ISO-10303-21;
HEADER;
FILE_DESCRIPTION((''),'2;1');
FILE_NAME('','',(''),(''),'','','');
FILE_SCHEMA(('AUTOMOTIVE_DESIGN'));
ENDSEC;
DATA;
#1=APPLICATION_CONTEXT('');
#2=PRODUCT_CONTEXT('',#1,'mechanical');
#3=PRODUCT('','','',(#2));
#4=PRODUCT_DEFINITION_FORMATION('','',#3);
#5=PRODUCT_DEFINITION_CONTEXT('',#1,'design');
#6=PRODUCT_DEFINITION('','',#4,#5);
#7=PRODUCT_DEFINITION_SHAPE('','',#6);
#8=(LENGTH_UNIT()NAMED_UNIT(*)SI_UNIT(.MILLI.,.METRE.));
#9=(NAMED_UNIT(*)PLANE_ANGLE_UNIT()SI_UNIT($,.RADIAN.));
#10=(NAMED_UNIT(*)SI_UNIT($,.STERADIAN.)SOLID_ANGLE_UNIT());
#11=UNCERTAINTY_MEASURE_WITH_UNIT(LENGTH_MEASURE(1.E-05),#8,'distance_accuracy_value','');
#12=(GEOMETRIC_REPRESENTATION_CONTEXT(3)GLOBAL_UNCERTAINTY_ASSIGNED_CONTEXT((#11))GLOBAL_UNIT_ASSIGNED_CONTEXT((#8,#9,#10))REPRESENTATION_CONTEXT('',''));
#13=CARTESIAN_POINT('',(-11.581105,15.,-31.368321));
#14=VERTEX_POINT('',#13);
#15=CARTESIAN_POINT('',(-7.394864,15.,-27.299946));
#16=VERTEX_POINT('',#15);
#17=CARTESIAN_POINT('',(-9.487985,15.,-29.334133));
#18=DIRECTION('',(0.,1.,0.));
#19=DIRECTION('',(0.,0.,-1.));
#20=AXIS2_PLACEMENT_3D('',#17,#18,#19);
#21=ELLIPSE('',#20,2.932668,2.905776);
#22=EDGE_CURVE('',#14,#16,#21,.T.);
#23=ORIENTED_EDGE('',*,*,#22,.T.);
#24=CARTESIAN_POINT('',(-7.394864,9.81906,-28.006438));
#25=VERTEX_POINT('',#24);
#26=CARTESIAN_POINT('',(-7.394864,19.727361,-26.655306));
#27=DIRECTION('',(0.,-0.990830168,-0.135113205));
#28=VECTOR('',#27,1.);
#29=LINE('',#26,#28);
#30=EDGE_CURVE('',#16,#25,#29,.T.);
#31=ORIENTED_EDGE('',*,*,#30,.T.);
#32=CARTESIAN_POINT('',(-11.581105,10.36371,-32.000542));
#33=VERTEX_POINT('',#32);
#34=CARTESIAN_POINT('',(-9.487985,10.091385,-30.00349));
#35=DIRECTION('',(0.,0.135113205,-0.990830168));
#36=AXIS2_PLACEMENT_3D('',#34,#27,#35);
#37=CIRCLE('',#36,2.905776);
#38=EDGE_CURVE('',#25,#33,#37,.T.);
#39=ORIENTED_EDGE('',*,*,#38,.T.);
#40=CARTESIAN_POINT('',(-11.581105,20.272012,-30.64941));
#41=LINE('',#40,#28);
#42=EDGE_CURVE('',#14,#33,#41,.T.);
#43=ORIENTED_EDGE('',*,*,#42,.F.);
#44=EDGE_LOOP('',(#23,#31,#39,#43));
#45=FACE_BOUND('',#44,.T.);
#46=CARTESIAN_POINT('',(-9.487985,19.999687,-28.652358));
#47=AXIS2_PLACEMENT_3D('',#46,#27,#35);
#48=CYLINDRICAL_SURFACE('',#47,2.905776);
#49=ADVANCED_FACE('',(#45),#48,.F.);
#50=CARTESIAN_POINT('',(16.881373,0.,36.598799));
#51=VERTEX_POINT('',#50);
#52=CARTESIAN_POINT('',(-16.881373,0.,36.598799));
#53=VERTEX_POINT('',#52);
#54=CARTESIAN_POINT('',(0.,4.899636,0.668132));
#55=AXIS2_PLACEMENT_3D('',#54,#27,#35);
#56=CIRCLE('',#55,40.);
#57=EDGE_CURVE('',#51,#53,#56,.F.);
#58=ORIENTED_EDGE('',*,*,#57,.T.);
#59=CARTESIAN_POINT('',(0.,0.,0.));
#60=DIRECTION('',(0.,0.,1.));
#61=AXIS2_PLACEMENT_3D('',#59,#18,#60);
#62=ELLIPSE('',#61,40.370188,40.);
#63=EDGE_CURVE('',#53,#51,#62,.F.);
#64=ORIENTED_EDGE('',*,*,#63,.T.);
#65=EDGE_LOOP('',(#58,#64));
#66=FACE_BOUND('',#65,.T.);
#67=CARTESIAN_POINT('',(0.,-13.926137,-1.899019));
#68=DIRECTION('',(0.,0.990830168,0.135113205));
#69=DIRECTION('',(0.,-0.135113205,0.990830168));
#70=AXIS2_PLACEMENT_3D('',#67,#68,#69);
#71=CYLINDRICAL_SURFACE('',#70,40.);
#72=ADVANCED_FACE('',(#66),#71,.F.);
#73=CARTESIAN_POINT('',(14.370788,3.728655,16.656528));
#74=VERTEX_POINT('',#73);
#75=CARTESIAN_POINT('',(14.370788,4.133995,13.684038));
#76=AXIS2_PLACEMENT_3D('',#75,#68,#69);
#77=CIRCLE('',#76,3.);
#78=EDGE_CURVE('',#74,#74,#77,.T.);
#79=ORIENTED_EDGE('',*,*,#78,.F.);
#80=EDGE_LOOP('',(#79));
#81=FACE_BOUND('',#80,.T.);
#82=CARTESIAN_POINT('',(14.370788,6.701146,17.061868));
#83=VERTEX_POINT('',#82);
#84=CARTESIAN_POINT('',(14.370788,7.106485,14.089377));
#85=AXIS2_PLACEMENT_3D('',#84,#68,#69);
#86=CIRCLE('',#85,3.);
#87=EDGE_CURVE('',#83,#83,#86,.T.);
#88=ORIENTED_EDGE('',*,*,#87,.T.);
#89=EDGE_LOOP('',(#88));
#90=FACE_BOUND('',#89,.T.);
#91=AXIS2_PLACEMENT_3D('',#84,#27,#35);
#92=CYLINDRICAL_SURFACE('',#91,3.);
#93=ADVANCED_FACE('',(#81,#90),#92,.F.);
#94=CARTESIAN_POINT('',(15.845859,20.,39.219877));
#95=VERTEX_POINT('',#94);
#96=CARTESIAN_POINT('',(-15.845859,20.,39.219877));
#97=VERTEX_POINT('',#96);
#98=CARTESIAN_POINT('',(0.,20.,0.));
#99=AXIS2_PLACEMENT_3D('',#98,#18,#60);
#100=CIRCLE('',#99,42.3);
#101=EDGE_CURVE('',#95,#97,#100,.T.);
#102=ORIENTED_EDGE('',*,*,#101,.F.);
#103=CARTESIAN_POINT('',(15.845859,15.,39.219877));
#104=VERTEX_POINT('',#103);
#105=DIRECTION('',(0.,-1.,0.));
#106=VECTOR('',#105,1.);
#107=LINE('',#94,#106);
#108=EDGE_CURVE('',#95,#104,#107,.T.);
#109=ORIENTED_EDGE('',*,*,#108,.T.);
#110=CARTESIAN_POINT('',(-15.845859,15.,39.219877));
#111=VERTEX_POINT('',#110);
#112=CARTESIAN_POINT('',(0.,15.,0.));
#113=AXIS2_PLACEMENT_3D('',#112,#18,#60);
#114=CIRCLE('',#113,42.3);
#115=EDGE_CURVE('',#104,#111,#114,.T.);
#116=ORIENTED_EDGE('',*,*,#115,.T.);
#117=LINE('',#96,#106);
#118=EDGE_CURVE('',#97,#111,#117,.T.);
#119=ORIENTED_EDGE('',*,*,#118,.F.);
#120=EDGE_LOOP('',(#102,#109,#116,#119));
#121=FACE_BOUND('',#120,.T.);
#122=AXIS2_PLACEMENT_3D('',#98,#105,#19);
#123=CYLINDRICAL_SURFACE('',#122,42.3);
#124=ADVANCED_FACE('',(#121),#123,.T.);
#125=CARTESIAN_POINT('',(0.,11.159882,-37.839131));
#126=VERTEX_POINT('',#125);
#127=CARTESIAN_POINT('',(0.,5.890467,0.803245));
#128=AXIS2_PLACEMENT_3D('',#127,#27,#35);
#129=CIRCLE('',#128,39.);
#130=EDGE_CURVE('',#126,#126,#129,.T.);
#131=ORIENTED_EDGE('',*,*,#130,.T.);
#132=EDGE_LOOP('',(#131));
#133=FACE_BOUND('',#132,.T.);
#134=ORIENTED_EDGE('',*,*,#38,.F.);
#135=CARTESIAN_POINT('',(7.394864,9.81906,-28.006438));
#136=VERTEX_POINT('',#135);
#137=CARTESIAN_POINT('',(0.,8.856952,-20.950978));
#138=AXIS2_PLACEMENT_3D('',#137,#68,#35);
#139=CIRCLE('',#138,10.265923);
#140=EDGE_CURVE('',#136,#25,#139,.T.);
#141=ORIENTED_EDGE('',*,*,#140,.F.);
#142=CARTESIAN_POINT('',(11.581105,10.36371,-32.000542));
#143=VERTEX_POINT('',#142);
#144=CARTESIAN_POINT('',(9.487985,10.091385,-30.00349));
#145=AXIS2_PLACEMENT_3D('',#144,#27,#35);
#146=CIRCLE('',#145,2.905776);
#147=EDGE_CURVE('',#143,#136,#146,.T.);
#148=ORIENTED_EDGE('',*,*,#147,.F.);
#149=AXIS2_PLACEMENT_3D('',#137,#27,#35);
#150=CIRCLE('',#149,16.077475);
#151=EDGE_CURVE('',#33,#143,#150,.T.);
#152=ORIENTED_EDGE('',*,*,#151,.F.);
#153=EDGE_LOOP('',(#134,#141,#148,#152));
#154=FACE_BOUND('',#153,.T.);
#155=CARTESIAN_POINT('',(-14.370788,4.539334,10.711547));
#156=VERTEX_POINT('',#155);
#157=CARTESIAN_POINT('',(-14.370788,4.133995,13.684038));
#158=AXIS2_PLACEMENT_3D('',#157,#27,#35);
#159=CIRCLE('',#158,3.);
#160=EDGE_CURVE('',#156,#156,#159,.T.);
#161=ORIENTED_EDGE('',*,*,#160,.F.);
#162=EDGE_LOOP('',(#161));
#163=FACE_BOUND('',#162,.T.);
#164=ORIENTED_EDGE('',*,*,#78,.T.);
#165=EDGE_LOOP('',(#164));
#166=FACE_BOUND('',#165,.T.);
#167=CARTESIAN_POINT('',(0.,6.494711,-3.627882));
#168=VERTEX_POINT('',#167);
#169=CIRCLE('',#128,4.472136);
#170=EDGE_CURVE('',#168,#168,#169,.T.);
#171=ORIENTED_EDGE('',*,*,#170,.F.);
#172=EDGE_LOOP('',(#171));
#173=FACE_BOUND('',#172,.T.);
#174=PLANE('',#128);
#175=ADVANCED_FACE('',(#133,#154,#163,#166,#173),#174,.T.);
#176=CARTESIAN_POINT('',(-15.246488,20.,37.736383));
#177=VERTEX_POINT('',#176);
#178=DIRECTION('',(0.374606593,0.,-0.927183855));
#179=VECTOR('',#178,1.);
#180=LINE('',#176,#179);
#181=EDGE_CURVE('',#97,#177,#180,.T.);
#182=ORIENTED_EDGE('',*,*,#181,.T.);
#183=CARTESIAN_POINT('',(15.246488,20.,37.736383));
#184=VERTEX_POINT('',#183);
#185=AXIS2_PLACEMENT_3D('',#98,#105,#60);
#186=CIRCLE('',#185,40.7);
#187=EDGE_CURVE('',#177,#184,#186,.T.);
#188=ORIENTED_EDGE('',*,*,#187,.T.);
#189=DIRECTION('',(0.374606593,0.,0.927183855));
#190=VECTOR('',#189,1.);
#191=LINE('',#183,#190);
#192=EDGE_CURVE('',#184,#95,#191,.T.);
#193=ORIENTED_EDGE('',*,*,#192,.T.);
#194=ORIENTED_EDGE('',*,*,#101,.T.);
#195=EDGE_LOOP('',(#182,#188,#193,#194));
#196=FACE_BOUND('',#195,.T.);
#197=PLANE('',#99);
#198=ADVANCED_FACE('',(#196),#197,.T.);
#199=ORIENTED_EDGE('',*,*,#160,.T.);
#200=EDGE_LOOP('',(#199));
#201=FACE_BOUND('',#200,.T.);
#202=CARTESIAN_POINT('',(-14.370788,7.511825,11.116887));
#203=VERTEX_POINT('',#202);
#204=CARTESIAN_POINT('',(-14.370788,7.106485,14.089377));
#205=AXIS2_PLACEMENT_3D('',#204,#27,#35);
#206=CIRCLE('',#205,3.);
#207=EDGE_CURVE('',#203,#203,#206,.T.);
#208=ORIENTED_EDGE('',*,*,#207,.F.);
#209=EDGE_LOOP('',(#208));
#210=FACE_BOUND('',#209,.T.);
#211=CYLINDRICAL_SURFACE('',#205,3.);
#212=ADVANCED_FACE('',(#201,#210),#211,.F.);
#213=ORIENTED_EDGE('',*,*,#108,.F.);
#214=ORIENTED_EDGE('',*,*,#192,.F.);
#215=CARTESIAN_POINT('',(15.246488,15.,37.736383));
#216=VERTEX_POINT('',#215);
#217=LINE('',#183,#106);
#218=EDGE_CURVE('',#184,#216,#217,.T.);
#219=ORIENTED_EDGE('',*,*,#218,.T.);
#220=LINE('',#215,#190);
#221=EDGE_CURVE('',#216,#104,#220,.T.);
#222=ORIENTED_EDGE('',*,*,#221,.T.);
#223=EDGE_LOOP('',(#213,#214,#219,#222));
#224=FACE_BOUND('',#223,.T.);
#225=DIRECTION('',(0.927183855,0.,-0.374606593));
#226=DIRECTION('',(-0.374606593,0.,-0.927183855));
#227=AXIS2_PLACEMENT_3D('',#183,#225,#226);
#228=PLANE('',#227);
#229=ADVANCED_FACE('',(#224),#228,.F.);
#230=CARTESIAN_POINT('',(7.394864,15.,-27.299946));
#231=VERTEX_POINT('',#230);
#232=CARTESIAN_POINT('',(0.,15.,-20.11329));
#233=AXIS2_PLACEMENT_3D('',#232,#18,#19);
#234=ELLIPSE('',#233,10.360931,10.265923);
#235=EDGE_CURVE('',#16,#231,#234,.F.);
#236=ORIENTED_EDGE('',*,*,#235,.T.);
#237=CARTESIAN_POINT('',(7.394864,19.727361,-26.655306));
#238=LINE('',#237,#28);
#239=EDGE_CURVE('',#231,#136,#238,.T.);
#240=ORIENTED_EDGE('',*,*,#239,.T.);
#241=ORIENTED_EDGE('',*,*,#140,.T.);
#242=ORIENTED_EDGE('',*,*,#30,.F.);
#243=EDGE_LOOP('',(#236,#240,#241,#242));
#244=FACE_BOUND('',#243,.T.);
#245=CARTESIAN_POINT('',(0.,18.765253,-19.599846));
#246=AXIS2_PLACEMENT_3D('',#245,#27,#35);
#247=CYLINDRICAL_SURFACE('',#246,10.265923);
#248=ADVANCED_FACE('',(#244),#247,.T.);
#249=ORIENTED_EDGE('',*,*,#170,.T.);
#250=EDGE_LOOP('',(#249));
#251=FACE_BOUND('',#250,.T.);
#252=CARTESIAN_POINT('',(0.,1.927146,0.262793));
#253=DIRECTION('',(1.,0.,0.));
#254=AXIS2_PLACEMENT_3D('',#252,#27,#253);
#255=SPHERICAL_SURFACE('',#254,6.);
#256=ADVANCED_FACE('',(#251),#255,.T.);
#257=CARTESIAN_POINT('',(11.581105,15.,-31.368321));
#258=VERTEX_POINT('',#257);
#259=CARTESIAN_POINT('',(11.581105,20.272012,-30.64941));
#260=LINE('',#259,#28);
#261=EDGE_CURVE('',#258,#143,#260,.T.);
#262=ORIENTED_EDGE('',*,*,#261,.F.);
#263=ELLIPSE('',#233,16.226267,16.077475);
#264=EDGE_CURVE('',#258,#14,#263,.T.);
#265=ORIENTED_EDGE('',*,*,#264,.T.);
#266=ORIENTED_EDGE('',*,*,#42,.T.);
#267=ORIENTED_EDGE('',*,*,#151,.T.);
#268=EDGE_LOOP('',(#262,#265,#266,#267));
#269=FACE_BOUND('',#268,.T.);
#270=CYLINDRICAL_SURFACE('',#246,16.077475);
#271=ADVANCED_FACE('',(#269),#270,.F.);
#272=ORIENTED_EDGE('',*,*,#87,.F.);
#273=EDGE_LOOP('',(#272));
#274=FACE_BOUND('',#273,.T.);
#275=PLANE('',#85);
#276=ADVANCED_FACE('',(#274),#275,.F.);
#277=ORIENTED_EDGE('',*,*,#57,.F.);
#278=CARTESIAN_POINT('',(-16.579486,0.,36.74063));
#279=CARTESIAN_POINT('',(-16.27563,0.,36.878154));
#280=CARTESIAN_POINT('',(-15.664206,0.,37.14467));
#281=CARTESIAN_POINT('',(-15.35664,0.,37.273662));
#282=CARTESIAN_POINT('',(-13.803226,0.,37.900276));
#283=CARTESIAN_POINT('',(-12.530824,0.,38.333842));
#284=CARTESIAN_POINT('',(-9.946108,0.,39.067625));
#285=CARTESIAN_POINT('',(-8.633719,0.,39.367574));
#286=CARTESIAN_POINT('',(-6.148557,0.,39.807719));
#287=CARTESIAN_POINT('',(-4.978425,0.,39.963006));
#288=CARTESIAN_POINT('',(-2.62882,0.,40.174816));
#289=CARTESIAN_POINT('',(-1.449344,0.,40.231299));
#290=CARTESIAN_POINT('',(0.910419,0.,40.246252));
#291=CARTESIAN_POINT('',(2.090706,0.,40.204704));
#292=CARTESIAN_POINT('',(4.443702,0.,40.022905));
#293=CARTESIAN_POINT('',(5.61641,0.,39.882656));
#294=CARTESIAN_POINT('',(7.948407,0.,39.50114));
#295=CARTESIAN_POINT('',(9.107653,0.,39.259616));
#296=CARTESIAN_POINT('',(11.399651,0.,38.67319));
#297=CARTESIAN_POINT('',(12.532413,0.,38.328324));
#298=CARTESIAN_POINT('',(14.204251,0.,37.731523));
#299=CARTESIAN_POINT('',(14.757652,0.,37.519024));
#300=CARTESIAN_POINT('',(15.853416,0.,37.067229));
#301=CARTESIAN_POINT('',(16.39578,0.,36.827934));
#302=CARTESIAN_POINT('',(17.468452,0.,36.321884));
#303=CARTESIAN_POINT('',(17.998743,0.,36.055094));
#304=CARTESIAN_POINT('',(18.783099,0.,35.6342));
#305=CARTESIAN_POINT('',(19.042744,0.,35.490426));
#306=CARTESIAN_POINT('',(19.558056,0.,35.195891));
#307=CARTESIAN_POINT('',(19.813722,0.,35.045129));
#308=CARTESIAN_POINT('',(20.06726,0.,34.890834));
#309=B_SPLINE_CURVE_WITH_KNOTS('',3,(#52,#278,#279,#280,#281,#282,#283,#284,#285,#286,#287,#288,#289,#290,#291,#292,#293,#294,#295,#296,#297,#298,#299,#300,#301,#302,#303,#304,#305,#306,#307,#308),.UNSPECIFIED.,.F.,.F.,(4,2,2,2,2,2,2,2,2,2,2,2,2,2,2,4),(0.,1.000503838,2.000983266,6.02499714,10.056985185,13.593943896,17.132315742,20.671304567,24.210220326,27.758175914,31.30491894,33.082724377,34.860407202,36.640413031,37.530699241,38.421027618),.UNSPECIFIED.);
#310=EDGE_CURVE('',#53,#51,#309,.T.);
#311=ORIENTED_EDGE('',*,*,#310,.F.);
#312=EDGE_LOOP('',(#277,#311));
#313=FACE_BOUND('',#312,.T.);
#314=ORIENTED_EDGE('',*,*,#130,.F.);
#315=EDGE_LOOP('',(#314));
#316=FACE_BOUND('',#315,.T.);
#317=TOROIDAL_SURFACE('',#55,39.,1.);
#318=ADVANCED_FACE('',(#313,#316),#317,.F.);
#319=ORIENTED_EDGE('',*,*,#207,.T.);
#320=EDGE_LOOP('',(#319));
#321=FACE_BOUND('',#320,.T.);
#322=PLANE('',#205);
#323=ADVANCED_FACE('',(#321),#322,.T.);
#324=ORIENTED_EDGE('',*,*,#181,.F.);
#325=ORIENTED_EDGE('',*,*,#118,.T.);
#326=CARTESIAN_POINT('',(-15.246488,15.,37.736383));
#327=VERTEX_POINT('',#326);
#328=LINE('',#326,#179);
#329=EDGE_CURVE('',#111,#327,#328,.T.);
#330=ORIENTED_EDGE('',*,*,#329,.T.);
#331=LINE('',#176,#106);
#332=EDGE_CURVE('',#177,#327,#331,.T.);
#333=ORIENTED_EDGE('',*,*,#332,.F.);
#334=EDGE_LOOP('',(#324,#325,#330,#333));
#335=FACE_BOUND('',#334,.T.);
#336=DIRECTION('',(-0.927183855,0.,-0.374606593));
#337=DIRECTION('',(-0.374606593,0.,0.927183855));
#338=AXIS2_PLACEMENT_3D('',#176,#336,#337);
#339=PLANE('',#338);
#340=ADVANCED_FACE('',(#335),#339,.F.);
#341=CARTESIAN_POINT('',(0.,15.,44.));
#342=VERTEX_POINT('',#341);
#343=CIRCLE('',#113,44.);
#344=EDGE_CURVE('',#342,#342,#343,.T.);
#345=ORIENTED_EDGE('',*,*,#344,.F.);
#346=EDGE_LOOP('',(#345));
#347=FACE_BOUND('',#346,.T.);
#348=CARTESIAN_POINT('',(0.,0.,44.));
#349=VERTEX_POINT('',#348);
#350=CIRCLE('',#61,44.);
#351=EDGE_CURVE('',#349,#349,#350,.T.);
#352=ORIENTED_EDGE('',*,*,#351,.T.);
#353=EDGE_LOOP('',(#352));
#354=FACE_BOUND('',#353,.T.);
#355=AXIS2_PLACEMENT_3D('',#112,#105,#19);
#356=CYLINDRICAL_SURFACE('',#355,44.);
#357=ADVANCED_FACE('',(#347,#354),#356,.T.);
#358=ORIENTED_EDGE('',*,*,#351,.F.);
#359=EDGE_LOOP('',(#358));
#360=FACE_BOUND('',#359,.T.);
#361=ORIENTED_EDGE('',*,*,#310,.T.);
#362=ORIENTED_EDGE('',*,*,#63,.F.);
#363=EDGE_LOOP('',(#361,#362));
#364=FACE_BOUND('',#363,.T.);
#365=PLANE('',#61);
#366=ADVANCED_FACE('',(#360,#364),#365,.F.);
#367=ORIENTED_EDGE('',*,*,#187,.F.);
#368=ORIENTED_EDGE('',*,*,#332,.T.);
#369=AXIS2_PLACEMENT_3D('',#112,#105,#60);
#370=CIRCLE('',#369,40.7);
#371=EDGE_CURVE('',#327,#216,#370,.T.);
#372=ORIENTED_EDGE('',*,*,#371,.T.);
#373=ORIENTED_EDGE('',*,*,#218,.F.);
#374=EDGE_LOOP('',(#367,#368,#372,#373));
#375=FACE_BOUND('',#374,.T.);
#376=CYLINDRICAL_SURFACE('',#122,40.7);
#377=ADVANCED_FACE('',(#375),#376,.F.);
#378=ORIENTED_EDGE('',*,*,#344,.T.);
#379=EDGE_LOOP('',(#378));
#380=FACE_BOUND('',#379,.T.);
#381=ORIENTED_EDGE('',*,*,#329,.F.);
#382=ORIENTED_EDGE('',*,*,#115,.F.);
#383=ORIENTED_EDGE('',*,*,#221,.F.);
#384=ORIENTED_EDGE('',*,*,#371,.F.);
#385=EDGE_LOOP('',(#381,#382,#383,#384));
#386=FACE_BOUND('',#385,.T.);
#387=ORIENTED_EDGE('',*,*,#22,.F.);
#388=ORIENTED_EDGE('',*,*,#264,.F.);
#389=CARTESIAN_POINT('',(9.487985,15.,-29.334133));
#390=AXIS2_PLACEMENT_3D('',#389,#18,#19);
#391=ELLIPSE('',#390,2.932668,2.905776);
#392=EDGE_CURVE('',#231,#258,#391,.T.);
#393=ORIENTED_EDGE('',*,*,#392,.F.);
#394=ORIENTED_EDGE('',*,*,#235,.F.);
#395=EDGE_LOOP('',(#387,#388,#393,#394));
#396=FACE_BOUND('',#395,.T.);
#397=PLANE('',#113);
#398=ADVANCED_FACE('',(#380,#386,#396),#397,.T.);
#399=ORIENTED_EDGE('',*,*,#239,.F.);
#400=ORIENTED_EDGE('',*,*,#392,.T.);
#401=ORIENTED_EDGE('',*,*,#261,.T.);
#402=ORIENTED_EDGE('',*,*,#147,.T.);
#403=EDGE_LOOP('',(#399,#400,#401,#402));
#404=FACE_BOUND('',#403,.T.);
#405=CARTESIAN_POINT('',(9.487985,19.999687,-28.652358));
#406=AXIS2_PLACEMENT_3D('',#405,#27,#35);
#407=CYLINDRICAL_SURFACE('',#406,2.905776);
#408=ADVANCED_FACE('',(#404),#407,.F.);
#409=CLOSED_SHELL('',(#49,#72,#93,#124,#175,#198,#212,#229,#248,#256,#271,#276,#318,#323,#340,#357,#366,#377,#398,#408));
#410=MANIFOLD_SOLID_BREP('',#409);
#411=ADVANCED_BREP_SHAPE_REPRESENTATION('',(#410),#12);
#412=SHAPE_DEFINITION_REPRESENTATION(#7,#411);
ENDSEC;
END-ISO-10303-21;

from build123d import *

# Parameters (mm, degrees)
SKETCH1_R           = 44
BOSS_EXTRUDE1_DEPTH = 15
BOSS_EXTRUDE2_DEPTH = 5
SKETCH5_R           = 40
CUT_EXTRUDE1_DEPTH  = 20
CUT_EXTRUDE2_DEPTH  = 10
SKETCH7_R           = 3
CUT_EXTRUDE3_DEPTH  = 3
FILLET4_R           = 1


with BuildPart() as part:
    # Sketch1 → Boss-Extrude1 (new body)
    with BuildSketch(Plane(origin=(0, 0, 0), x_dir=(1, 0, 0), z_dir=(0, 1, 0))):
        with Locations(Location((0, 0, 0), (0, 0, 270))):
            Circle(SKETCH1_R)
    extrude(amount=BOSS_EXTRUDE1_DEPTH)

    # Sketch2 → Boss-Extrude2 (add)
    with BuildSketch(Plane(origin=(0, 15, 0), x_dir=(1, 0, 0), z_dir=(0, 1, 0))):
        with BuildLine():
            Line((15.246488352, -37.736382881), (15.845858901, -39.219877048))
            ThreePointArc((15.845858901, -39.219877048), (0, 42.3), (-15.845858901, -39.219877048))
            Line((-15.845858901, -39.219877048), (-15.246488352, -37.736382881))
            ThreePointArc((-15.246488352, -37.736382881), (0, 40.7), (15.246488352, -37.736382881))
        make_face()
    extrude(amount=BOSS_EXTRUDE2_DEPTH)

    # Sketch5 → Cut-Extrude1 (cut)
    with BuildSketch(Plane(origin=(0, 5.890466531, 0.803245436), x_dir=(-1, 0, 0), z_dir=(0, -0.990830168044299, -0.13511320473331362))):
        with Locations(Location((0, 0, 0), (0, 0, 270))):
            Circle(SKETCH5_R)
    extrude(amount=CUT_EXTRUDE1_DEPTH, mode=Mode.SUBTRACT)

    # Sketch6 → Cut-Extrude2 (cut)
    with BuildSketch(Plane(origin=(0, 5.890466531, 0.803245436), x_dir=(1, 0, 0), z_dir=(0, -0.990830168044299, -0.13511320473331365))):
        with BuildLine():
            ThreePointArc((-11.581105416, -33.107376853), (0, -38.033026978), (11.581105416, -33.107376853))
            ThreePointArc((11.581105416, -33.107376853), (11.503519007, -28.998721657), (7.39486381, -29.076308066))
            ThreePointArc((7.39486381, -29.076308066), (0, -32.221475176), (-7.39486381, -29.076308066))
            ThreePointArc((-7.39486381, -29.076308066), (-11.503519007, -28.998721657), (-11.581105416, -33.107376853))
        make_face()
    extrude(amount=-CUT_EXTRUDE2_DEPTH, mode=Mode.SUBTRACT)

    # Sketch7 → Cut-Extrude3 (cut)
    with BuildSketch(Plane(origin=(0, 6.082528488, -0.605208909), x_dir=(1, 0, 0), z_dir=(0, 0.990830168044299, 0.13511320473331365))):
        with Locations(Location((14.370787869, -14.421489162, 0), (0, 0, 270))):
            Circle(SKETCH7_R)
        with Locations(Location((-14.370787869, -14.421489162, 0), (0, 0, 90))):
            Circle(SKETCH7_R)
    extrude(amount=CUT_EXTRUDE3_DEPTH, mode=Mode.SUBTRACT)

    # Fillet4
    # the kernel refuses this fillet: 1 mm, written as the material it adds along each edge
    with BuildSketch(Plane(origin=(0, 5.890466531, 0.803245436), x_dir=(0, -0.13511320473331362, 0.9908301680442989), z_dir=(1, 0, 0))) as fillet4_piece_1_section:
        with BuildLine():
            CenterArc((40 - FILLET4_R, FILLET4_R), FILLET4_R, 270, 90)
            Line((40 - FILLET4_R, 0), (40, 0))
            Line((40, 0), (40, FILLET4_R))
        make_face()
    fillet4_piece_1 = revolve(axis=Axis((0, 5.890466531, 0.803245436), (0, -0.990830168044299, -0.13511320473331362)), mode=Mode.PRIVATE)
    fillet4_piece_1 = split(fillet4_piece_1, bisect_by=Plane(origin=(0, 0, -38.603422622), z_dir=(0, 1, 0)), keep=Keep.TOP, mode=Mode.PRIVATE)
    add(fillet4_piece_1)

    # Sketch9 → Revolve4 (revolve)
    with BuildSketch(Plane(origin=(0, 0, 0), x_dir=(1, 0, 0), z_dir=(0, 0.13511320473331362, -0.990830168044299)), mode=Mode.PRIVATE) as revolve4_sk:
        with BuildLine():
            Line((0, 4.055018992), (0, -5.944981008))
            Line((0, -5.944981008), (4.472135955, -5.944981008))
            ThreePointArc((4.472135955, -5.944981008), (5.477225575, 0.504508735), (0, 4.055018992))
        make_face()
    revolve(revolve4_sk.sketch.rotate(Axis((0, -4.017835149, -0.547886611), (0, 0.9908301680442989, 0.1351132047333136)), 90), axis=Axis((0, -4.017835149, -0.547886611), (0, 0.9908301680442989, 0.1351132047333136)))


solid = part.part
